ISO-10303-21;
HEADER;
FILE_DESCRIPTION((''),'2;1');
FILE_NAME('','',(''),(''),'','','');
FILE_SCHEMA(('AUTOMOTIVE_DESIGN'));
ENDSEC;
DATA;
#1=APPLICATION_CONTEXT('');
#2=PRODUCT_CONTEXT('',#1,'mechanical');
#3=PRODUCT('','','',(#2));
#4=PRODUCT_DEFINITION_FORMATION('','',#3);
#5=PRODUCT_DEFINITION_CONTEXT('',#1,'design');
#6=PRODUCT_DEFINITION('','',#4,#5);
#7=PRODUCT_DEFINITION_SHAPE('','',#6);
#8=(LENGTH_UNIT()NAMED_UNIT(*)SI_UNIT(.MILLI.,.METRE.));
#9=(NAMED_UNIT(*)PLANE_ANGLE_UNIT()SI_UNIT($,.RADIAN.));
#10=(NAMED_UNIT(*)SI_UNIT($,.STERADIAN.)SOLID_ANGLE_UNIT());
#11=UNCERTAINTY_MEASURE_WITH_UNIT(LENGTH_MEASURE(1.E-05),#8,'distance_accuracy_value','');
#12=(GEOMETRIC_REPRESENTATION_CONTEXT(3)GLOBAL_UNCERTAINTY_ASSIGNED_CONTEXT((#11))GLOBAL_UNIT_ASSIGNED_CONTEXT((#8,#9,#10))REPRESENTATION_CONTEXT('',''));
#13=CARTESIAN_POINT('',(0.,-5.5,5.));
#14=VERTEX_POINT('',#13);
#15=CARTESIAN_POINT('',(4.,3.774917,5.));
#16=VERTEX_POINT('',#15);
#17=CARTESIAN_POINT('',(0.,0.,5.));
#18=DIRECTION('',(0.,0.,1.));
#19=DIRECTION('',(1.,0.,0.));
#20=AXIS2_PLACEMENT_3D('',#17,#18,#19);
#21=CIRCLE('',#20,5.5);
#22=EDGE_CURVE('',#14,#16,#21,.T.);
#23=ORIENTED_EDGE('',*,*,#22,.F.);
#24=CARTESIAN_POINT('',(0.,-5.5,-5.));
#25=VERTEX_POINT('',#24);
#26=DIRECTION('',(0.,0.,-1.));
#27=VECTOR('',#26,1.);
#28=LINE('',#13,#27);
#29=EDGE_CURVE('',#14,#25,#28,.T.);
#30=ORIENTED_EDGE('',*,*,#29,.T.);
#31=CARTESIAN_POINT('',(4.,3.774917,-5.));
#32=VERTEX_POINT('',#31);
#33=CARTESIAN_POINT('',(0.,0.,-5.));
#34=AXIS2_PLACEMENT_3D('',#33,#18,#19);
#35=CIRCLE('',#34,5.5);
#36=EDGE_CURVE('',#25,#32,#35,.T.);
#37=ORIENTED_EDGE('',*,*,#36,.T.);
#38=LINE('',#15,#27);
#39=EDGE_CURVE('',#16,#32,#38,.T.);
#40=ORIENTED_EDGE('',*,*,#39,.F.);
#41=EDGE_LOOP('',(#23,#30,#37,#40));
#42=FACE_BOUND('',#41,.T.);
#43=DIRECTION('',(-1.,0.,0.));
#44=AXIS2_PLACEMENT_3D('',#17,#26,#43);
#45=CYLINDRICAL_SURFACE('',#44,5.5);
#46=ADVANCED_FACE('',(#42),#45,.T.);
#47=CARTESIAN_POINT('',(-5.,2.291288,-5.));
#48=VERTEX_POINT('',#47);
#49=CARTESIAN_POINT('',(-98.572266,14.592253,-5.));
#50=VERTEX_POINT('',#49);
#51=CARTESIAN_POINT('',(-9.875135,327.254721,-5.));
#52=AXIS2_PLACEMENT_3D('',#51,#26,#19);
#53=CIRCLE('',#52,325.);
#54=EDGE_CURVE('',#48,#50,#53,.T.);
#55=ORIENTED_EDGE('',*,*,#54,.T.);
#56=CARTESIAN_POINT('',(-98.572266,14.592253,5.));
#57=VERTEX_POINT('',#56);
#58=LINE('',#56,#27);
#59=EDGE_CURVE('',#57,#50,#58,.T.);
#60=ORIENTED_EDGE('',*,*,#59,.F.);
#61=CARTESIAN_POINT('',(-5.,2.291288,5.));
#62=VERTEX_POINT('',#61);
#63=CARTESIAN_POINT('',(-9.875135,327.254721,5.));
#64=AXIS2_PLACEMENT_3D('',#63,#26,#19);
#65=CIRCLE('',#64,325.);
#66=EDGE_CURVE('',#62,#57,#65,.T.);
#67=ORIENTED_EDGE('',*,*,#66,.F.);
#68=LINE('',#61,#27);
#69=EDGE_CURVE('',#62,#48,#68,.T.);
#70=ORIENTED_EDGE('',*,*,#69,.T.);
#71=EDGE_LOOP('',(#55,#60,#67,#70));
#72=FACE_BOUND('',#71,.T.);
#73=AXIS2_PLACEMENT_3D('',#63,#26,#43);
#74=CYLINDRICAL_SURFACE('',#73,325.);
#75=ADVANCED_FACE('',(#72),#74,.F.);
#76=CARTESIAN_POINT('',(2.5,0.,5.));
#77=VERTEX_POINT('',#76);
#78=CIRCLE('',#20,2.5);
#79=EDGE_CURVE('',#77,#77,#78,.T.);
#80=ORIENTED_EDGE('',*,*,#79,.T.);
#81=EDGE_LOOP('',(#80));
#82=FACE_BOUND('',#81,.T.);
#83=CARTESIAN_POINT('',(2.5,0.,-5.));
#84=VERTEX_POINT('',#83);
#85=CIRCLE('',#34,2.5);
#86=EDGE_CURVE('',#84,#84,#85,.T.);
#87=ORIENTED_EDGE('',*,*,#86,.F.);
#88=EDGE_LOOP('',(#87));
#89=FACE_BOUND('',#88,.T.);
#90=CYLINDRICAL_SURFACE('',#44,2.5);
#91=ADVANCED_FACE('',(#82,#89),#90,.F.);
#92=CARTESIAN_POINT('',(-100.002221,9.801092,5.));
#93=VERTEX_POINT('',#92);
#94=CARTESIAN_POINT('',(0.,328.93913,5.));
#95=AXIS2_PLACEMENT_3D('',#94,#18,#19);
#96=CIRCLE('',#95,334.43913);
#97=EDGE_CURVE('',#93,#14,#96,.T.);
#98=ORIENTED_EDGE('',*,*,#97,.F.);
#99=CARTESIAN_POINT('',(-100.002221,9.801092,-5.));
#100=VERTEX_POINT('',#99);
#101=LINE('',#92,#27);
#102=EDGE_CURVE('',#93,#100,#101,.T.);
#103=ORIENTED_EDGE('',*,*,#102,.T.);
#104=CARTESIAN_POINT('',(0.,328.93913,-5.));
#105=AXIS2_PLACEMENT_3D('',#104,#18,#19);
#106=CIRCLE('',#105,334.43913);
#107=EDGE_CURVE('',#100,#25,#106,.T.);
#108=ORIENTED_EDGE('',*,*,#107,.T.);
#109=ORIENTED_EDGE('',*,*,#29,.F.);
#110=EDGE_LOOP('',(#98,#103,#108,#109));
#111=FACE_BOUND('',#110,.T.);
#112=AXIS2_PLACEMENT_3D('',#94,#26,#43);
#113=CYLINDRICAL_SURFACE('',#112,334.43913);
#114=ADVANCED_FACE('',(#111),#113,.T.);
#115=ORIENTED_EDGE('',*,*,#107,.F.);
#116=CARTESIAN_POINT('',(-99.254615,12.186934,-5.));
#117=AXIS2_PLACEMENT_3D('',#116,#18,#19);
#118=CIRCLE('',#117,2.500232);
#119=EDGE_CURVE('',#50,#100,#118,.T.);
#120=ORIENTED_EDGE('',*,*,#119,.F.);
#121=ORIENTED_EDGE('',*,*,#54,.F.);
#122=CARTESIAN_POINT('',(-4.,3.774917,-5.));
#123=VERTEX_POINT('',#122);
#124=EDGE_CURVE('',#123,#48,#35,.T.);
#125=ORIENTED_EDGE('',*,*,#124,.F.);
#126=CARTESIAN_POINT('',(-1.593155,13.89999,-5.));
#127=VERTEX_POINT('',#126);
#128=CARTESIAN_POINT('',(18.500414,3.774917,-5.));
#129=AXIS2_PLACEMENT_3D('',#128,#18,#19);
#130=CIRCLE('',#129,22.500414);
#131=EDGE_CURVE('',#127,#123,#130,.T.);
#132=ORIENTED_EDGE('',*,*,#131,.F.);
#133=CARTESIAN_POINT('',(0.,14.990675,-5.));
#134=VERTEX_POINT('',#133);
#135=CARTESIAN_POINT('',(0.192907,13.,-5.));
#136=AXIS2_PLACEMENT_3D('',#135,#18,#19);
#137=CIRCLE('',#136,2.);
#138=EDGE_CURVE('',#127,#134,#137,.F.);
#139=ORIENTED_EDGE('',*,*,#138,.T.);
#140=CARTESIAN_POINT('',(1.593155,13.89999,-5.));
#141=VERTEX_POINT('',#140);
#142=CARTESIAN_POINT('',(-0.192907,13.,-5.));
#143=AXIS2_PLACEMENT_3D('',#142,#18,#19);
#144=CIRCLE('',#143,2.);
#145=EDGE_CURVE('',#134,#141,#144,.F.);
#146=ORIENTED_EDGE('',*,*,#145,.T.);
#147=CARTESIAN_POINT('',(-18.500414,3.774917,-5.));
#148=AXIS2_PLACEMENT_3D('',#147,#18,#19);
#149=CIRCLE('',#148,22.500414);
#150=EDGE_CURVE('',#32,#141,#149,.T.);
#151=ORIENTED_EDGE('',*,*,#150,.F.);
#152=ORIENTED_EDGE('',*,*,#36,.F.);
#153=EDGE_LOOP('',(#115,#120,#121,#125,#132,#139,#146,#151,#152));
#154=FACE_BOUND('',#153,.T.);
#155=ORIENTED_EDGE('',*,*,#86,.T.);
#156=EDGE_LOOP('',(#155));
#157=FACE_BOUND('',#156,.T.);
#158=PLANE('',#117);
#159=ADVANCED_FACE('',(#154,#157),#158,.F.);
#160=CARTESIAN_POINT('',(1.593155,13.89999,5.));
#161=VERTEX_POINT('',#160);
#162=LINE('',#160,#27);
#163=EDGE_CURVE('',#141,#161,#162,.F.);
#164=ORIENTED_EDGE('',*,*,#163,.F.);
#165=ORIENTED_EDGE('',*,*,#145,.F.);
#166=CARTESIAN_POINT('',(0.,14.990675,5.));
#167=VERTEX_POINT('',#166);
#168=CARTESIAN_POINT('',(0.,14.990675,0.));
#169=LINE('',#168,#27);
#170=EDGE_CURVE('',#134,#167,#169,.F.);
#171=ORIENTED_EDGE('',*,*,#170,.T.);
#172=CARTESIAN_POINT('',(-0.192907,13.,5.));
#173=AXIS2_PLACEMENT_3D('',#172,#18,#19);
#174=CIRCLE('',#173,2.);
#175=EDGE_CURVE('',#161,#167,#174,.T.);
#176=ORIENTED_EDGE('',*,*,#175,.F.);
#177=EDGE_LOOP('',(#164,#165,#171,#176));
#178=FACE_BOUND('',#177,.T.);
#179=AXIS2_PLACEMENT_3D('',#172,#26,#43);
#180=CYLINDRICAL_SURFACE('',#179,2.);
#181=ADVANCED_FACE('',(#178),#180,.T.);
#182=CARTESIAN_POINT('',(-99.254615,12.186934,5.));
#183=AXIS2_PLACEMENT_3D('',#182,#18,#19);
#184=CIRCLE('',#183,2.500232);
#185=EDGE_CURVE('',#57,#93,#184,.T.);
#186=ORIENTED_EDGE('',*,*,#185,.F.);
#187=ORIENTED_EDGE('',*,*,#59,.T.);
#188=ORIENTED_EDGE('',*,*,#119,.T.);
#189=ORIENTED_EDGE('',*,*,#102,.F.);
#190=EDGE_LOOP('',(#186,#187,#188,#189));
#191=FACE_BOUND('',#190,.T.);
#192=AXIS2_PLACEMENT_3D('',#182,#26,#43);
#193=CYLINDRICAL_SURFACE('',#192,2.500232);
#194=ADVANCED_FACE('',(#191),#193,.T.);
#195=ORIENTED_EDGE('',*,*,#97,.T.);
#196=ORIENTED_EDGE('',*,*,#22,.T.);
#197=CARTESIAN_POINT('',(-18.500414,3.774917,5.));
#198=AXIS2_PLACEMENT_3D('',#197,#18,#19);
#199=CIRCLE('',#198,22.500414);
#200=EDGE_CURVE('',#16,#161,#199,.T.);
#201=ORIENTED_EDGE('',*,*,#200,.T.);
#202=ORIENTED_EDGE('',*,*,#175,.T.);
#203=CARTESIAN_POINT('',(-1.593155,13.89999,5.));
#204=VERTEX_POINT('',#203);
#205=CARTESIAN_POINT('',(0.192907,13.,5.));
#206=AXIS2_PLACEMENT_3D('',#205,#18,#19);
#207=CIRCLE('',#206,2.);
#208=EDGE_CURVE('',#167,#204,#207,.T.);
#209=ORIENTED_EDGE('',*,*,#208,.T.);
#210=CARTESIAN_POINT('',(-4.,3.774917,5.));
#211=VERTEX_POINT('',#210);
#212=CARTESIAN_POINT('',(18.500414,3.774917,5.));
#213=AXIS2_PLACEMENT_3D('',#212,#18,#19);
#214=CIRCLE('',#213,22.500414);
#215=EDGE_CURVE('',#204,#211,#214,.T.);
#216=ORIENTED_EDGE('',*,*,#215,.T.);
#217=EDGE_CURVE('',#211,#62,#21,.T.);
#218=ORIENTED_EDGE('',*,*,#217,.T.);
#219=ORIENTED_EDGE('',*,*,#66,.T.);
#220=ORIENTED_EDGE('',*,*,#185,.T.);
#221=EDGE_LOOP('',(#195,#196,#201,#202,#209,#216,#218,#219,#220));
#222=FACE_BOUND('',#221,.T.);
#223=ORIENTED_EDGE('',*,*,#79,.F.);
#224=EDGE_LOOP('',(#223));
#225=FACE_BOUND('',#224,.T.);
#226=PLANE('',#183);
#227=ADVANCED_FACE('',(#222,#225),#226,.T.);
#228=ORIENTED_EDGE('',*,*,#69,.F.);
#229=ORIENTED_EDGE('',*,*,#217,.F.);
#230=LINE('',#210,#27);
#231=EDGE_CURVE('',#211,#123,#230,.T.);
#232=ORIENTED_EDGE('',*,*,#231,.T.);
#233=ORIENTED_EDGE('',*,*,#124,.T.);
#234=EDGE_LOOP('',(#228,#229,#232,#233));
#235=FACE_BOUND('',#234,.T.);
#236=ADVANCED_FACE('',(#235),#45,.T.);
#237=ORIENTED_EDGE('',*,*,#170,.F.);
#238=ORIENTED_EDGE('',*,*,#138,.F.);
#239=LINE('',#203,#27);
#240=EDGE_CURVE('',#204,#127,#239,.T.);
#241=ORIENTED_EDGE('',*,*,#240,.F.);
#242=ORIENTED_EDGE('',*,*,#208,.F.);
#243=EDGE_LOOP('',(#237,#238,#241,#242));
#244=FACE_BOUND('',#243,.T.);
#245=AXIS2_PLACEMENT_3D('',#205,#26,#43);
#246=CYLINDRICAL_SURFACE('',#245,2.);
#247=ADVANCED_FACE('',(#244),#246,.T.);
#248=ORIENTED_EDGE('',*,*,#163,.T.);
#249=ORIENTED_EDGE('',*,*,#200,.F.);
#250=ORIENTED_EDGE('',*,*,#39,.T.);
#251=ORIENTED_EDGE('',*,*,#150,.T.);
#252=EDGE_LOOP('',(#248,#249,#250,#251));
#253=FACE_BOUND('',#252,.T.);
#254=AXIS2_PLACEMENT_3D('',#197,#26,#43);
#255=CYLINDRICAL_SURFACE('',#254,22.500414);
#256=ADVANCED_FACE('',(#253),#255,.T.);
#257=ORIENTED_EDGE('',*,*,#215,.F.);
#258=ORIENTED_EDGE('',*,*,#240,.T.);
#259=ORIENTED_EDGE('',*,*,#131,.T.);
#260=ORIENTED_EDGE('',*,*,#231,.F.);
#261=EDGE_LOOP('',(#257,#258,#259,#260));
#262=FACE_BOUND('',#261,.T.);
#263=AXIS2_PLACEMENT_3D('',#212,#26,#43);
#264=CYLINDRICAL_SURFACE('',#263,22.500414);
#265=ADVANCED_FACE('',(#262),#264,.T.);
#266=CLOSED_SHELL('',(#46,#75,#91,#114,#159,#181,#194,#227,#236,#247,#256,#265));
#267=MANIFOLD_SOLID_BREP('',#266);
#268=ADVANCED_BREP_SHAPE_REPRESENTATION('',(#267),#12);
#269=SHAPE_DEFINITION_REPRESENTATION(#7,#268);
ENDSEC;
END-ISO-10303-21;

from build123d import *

# Parameters (mm, degrees)
SKETCH2_R           = 2.5
BOSS_EXTRUDE1_DEPTH = 5
FILLET1_R           = 2


with BuildPart() as part:
    # Sketch2 → Boss-Extrude1 (new, symmetric)
    with BuildSketch(Plane.XY):
        with BuildLine():
            Line((-1, 15), (1, 15))
            ThreePointArc((1, 15), (3.237065366, 9.584445672), (4, 3.774917218))
            ThreePointArc((4, 3.774917218), (5.050348735, -2.178067412), (0, -5.5))
            ThreePointArc((0, -5.5), (-50.58302006, -1.652596692), (-100.002221288, 9.801091818))
            ThreePointArc((-100.002221288, 9.801091818), (-101.650418114, 12.901978174), (-98.572266253, 14.592253326))
            ThreePointArc((-98.572266253, 14.592253326), (-52.235024066, 5.027100207), (-5, 2.291287847))
            ThreePointArc((-5, 2.291287847), (-4.560733387, 3.074038219), (-4, 3.774917218))
            ThreePointArc((-4, 3.774917218), (-3.237065366, 9.584445672), (-1, 15))
        make_face()
        Circle(SKETCH2_R, mode=Mode.SUBTRACT)
    extrude(amount=BOSS_EXTRUDE1_DEPTH, both=True)

    # Fillet1
    # the kernel refuses this fillet: 2 mm, written as the material it takes off along each edge
    with BuildSketch(Plane(origin=(1, 15, 8.124355519), x_dir=(0.4746222349820919, -0.8801896011999936, 0), z_dir=(0, 0, -1))) as fillet1_piece_1:
        with BuildLine():
            CenterArc((1.194199131, 1.999228593), FILLET1_R, 208.334756637, 63.256639898)
            Line((-0.566180071, 1.049984123), (0, 0))
            ThreePointArc((0, 0), (0.624871104, -0.00867849), (1.249742207, 0))
        make_face()
    extrude(amount=16.248711037, mode=Mode.SUBTRACT)
    with BuildSketch(Plane(origin=(-1, 15, 8.124355519), x_dir=(1, 0, 0), z_dir=(0, 0, -1))) as fillet1_piece_2:
        with BuildLine():
            CenterArc((1.192906757, 2), FILLET1_R, 206.743360102, 63.256639898)
            ThreePointArc((-0.59315544, 1.100010095), (-0.304216436, 0.545886044), (0, 0))
            Line((0, 0), (1.192906757, 0))
        make_face()
    extrude(amount=16.248711037, mode=Mode.SUBTRACT)


solid = part.part
